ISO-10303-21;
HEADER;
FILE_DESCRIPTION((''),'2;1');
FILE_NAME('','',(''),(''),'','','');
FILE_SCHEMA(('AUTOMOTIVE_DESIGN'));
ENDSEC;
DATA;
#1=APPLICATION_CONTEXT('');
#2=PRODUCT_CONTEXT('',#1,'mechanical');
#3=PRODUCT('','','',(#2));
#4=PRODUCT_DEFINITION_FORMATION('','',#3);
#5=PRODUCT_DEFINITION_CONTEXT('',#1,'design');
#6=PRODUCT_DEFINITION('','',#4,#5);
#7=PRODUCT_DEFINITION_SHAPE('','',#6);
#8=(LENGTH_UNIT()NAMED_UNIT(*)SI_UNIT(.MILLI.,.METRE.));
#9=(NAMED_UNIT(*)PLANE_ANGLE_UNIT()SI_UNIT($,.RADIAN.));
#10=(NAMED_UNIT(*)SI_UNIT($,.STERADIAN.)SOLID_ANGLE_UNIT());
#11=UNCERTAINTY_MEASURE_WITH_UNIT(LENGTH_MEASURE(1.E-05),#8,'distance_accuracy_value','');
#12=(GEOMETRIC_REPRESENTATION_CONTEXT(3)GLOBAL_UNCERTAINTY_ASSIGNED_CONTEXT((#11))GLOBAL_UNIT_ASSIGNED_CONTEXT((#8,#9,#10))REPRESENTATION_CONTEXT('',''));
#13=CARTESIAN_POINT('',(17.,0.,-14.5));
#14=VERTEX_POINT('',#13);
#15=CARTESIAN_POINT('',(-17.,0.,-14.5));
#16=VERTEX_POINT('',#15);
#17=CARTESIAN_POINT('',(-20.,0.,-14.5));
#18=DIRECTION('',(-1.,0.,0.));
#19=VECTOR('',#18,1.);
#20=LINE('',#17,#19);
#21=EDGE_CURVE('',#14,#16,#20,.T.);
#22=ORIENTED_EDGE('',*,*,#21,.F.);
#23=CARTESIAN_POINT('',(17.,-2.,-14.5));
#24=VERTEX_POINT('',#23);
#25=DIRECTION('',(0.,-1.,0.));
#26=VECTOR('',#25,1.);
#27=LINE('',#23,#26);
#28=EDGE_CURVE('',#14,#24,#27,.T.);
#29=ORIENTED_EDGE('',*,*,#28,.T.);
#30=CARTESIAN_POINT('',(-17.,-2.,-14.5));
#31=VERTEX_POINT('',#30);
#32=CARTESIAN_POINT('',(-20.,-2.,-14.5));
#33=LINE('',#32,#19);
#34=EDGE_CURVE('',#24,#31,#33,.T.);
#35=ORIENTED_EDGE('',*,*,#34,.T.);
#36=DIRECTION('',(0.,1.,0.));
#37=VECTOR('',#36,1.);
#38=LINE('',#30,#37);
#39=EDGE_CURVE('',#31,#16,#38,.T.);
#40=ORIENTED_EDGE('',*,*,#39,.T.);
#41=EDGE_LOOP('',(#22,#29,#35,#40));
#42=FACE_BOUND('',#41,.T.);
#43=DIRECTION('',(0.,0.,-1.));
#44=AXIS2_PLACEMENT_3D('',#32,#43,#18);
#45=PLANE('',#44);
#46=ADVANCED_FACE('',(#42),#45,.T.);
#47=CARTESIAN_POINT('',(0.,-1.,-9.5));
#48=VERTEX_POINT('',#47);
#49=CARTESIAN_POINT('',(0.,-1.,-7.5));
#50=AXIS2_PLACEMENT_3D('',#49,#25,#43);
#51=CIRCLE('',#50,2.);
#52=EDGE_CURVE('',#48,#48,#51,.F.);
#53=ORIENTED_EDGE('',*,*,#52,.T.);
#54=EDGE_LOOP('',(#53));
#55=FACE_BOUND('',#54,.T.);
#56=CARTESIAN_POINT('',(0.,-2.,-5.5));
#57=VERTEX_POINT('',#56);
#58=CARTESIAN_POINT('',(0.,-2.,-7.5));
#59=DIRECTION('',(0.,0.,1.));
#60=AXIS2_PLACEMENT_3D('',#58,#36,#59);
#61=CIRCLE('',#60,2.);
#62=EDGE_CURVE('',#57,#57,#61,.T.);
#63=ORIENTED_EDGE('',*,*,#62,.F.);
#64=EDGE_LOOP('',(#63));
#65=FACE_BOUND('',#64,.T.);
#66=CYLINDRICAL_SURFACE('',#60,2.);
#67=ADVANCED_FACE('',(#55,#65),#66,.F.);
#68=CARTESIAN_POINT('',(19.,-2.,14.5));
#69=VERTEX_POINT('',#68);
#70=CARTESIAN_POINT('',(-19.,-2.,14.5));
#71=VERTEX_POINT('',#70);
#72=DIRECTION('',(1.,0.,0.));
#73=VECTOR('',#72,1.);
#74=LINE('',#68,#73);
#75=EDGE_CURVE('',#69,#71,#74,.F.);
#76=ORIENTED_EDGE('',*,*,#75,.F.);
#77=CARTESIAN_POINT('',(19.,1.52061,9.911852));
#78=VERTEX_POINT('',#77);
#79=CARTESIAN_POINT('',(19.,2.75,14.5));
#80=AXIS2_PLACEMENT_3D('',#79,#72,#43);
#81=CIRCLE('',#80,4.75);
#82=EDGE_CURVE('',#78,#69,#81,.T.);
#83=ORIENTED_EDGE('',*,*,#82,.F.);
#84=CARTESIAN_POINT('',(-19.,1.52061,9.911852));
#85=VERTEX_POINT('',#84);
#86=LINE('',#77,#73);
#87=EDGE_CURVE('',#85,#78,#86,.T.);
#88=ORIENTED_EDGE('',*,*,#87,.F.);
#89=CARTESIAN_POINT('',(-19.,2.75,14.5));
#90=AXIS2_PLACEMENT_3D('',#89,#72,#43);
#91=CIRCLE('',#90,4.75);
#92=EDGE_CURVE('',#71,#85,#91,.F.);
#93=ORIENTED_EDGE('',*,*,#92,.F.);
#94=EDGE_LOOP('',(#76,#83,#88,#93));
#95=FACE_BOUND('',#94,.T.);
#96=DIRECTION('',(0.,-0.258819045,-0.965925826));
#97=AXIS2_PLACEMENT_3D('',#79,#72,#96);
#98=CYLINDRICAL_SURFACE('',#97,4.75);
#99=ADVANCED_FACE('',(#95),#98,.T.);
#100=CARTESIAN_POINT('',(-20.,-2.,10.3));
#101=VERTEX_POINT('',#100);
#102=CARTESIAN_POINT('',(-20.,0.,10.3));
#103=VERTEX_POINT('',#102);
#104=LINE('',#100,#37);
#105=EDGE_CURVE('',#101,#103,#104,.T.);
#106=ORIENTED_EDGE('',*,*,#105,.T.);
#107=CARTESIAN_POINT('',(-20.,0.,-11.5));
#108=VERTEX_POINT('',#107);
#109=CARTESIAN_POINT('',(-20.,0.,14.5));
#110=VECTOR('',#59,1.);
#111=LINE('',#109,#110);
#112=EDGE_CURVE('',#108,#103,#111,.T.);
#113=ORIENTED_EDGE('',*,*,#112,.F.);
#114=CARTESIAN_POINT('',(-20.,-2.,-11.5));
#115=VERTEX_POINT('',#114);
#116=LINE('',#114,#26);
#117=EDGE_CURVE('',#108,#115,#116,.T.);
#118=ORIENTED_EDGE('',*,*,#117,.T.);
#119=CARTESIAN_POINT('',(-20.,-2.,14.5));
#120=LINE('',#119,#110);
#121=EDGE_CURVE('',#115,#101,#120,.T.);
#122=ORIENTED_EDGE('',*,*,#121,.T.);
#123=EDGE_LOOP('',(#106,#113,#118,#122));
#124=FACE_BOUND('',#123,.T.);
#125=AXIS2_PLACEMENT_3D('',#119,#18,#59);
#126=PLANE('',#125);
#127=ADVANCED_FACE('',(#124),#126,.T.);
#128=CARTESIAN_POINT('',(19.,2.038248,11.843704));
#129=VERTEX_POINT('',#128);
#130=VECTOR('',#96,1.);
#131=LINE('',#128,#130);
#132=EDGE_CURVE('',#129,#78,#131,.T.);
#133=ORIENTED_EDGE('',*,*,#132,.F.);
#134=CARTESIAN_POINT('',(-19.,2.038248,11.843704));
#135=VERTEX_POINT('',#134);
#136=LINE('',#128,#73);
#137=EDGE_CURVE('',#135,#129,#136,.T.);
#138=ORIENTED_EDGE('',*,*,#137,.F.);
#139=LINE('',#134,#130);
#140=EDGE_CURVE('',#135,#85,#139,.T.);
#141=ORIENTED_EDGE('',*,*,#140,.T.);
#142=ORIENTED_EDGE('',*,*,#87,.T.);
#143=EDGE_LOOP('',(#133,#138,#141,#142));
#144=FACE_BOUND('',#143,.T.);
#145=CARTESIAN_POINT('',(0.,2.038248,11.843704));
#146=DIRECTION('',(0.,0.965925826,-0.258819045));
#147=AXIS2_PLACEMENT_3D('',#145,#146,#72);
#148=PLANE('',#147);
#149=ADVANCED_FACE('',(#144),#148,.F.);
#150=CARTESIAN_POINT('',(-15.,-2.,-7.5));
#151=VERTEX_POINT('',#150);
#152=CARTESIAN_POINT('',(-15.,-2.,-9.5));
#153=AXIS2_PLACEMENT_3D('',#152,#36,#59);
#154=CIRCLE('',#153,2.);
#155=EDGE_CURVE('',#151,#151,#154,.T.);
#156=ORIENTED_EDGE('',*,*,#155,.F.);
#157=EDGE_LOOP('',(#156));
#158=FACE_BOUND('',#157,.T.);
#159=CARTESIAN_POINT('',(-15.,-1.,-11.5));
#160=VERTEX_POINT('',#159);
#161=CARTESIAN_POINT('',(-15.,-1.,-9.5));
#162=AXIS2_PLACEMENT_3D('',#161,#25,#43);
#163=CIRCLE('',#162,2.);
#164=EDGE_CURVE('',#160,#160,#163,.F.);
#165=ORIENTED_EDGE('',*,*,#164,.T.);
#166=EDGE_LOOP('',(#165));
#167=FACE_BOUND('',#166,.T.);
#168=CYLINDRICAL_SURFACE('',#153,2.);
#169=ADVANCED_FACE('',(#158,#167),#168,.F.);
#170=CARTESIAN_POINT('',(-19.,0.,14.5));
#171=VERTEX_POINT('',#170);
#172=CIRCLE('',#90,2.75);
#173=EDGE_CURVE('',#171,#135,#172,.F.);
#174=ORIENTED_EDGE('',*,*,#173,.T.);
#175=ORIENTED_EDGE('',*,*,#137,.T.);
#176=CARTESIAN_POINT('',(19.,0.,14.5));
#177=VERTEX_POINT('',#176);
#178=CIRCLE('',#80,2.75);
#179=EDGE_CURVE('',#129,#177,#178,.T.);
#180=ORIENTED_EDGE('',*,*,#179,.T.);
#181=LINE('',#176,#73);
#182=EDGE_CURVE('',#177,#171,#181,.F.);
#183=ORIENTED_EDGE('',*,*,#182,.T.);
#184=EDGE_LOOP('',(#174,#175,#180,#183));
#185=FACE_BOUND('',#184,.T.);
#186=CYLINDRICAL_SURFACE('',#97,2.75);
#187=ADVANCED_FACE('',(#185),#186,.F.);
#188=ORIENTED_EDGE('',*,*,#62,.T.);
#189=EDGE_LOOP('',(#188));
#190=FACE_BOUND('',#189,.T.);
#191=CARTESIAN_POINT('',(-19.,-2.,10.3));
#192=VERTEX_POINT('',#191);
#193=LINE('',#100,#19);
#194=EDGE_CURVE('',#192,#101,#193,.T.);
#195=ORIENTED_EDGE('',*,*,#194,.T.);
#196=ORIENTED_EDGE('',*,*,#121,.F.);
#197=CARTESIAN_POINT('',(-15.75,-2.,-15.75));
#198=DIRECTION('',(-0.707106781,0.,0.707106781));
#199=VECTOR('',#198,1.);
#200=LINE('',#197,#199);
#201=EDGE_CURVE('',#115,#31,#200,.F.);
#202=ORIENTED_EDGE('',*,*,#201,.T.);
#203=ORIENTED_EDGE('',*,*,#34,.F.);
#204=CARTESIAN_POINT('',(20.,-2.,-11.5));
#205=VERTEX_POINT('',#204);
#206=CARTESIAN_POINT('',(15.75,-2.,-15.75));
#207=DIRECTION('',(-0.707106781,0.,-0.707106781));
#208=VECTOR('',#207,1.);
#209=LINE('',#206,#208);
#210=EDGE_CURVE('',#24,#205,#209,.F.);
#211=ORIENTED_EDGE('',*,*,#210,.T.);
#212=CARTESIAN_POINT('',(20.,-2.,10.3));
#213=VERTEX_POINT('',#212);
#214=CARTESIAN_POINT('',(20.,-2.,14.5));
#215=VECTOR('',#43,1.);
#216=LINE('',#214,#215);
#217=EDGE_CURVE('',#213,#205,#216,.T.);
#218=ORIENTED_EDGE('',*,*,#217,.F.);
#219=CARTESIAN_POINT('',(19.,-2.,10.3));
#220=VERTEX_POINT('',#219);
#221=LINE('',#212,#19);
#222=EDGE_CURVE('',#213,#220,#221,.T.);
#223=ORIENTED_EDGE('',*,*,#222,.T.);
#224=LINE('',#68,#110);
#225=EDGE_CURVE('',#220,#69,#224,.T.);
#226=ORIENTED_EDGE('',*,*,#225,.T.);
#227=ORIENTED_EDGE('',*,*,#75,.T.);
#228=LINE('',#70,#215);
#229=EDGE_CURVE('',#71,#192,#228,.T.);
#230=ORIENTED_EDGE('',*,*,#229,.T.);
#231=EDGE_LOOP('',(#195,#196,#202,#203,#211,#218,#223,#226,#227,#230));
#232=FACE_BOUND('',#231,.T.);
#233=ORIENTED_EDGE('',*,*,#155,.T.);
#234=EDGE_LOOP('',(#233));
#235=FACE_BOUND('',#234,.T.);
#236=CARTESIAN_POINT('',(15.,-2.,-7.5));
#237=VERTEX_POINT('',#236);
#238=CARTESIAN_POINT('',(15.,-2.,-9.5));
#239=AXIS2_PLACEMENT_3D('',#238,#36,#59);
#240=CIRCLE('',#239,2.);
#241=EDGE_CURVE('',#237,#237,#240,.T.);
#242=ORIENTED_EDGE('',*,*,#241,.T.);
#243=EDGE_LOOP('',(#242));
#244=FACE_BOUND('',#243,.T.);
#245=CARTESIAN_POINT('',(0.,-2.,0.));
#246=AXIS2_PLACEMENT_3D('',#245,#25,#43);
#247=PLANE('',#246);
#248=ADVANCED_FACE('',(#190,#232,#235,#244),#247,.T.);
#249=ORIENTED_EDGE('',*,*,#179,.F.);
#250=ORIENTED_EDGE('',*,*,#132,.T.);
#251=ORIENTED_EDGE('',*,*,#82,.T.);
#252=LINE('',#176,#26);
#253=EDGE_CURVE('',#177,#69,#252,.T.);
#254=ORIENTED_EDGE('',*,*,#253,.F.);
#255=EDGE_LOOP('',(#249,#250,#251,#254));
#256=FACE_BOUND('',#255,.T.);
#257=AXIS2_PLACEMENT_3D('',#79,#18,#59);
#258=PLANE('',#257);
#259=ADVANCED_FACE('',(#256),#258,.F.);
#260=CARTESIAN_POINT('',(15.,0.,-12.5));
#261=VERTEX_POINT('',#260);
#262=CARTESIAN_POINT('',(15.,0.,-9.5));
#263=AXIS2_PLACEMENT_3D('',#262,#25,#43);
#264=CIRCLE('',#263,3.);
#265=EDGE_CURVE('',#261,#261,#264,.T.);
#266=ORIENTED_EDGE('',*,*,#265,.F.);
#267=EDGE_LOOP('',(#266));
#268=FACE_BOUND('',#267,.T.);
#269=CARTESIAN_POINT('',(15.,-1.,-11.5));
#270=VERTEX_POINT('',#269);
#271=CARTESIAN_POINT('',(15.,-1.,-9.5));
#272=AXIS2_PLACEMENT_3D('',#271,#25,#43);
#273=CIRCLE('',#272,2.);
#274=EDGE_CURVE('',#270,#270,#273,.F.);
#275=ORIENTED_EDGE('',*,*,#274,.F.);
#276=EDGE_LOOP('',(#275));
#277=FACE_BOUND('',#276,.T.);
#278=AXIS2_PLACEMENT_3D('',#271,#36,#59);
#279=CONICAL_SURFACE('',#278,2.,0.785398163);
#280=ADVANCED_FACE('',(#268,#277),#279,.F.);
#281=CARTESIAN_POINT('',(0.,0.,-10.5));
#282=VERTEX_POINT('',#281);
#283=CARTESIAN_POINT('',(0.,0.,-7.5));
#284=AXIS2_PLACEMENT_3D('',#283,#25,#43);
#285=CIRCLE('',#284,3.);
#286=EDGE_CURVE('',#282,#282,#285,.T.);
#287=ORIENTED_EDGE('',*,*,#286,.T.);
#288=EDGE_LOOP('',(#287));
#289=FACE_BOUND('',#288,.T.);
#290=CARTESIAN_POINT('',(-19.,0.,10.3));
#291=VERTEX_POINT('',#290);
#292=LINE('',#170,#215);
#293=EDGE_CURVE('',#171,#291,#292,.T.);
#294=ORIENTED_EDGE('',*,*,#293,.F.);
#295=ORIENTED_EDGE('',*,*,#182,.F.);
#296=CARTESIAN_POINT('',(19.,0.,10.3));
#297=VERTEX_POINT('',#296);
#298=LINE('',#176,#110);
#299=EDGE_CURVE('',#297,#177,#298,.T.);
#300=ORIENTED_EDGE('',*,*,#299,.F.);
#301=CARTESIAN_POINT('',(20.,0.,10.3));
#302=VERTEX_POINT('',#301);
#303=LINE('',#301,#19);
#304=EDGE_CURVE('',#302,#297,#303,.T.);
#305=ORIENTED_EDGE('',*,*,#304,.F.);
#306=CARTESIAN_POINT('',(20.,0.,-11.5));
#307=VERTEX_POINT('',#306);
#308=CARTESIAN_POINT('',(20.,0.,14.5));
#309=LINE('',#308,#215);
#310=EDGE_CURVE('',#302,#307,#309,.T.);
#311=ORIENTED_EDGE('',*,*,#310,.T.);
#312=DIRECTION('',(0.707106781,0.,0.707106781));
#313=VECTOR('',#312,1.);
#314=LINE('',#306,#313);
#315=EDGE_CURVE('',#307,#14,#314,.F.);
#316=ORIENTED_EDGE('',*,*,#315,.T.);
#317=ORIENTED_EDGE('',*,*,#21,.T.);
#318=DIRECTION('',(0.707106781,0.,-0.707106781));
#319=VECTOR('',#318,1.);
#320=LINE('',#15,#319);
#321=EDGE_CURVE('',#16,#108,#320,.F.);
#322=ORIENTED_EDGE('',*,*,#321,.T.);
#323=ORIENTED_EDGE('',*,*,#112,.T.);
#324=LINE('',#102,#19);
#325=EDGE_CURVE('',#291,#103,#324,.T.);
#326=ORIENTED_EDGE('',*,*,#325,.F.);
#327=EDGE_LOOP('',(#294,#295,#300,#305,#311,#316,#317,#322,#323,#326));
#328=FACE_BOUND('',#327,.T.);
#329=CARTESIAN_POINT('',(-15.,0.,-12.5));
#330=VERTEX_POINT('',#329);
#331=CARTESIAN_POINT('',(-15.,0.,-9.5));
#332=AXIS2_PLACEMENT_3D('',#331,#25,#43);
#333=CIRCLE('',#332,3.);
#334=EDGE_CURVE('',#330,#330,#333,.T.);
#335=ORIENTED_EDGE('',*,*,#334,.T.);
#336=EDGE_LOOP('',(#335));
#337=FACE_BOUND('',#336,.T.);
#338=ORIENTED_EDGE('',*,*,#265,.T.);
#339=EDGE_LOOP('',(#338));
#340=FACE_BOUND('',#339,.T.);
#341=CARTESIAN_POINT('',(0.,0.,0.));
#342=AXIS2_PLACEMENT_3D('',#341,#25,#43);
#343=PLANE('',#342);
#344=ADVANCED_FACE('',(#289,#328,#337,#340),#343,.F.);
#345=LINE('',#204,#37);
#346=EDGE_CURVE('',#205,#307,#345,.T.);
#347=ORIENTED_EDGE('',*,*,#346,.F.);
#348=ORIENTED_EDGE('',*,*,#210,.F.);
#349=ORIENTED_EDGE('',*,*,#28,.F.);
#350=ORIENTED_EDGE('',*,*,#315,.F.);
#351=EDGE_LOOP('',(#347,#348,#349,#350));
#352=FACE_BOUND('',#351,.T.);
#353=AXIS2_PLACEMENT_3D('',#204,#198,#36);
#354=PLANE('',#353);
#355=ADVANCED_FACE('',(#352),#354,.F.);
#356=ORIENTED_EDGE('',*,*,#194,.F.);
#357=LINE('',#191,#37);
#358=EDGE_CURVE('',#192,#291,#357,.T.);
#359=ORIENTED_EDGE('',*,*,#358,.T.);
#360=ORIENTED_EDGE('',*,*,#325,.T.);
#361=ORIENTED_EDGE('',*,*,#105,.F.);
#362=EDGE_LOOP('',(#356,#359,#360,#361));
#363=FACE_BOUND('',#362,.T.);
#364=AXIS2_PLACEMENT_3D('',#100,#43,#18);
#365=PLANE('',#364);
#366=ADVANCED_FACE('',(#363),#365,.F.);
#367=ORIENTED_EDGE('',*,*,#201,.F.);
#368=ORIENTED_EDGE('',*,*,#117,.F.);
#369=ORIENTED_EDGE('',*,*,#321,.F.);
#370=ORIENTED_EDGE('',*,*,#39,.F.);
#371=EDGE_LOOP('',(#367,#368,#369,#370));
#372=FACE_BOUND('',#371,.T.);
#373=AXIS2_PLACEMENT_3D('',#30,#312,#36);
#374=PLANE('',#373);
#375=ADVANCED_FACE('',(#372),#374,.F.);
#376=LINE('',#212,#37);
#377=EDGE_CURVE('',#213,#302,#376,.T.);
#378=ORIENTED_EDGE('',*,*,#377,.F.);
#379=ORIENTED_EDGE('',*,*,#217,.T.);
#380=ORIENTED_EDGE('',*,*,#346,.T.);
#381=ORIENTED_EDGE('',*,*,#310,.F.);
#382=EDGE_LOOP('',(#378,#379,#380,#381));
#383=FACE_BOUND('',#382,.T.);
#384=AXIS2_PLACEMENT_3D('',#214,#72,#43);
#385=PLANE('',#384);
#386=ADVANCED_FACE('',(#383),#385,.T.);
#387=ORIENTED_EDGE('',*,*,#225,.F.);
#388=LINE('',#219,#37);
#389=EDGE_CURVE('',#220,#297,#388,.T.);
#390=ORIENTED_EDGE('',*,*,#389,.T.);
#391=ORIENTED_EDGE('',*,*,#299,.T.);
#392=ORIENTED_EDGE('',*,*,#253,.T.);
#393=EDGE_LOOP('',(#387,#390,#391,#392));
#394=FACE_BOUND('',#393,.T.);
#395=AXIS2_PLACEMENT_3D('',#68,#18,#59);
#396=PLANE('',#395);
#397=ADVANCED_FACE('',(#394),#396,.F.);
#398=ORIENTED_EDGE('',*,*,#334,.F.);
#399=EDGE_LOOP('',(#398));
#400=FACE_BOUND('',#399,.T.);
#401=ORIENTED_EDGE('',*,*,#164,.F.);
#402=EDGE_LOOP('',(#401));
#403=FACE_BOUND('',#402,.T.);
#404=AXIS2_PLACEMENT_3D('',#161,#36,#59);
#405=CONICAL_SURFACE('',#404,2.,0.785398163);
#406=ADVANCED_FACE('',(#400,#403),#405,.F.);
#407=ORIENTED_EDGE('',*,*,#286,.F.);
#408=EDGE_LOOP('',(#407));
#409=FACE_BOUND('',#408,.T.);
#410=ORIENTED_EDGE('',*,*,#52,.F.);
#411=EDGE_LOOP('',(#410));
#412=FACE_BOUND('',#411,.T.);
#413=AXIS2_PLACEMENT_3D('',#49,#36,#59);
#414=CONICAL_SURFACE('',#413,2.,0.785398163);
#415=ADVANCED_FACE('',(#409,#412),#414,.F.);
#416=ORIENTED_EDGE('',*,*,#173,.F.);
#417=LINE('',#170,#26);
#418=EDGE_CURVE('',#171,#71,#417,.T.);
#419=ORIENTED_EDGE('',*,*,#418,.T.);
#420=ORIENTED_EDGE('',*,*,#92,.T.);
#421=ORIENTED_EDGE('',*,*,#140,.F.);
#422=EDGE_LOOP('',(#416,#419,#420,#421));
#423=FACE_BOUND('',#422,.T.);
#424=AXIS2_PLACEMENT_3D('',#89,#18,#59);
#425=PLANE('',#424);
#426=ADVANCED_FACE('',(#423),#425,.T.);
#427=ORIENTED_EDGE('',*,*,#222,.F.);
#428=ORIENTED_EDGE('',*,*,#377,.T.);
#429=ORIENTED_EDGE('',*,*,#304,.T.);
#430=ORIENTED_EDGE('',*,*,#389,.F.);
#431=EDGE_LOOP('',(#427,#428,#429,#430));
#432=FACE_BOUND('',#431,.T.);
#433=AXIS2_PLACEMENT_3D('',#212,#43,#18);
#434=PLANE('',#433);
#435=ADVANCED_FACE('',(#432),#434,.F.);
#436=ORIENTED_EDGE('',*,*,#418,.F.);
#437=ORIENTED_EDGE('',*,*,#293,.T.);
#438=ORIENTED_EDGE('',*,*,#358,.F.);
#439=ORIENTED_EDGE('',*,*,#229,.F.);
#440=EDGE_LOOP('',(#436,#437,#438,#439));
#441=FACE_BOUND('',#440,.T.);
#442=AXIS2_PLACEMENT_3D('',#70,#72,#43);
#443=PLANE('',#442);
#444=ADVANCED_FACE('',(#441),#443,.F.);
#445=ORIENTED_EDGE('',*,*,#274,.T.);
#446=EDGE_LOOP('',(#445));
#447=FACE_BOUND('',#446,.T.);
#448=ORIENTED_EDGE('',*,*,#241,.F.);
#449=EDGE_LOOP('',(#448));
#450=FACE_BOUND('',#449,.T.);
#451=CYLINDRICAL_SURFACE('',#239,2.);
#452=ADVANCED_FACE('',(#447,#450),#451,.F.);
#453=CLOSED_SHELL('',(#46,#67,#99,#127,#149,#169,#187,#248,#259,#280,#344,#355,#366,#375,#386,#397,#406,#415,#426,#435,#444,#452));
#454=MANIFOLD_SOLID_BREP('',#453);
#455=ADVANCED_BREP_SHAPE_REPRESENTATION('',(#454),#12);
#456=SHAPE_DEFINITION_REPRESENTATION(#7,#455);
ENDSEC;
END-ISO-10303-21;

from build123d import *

# Parameters (mm, degrees)
SKETCH1_W           = 40
SKETCH1_H           = 29
BASE_FLANGE1_DEPTH  = 2
BREAK_CORNER1_START = -2
BREAK_CORNER1_DEPTH = 2
HEM2_START          = -19
HEM2_DEPTH          = 38
SKETCH10_W          = 1
SKETCH10_H          = 4.2
CUT_EXTRUDE1_DEPTH  = 10
SKETCH11_R          = 2
CUT_EXTRUDE2_DEPTH  = 2
CHAMFER1_SIZE       = 1


# Read off the part's stored shape, not the designer's step: Break-Corner1, Hem2
# Sheet-metal steps are written as plain solids
with BuildPart() as part:
    # Sketch1 → Base-Flange1 (new body)
    with BuildSketch(Plane(origin=(0, 0, 0), x_dir=(1, 0, 0), z_dir=(0, 1, 0))):
        Rectangle(SKETCH1_W, SKETCH1_H)
    extrude(amount=-BASE_FLANGE1_DEPTH)

    # Break-Corner1 outline → Break-Corner1 (cut)
    with BuildSketch(Plane(origin=(0, 0, 0), x_dir=(1, 0, 0), z_dir=(0, 1, 0)).offset(BREAK_CORNER1_START)):
        Polygon((-20, 14.5), (-20, 11.5), (-17, 14.5), align=None)
        Polygon((20, 14.5), (17, 14.5), (20, 11.5), align=None)
    extrude(amount=BREAK_CORNER1_DEPTH, mode=Mode.SUBTRACT)

    # Hem2 outline → Hem2 (add)
    with BuildSketch(Plane.YZ.offset(HEM2_START)):
        with BuildLine():
            Line((2.038247626, 11.843703978), (1.520609536, 9.911852325))
            ThreePointArc((1.520609536, 9.911852325), (6.518428366, 17.391616788), (-2, 14.5))
            Line((-2, 14.5), (0, 14.5))
            ThreePointArc((0, 14.5), (4.931721686, 16.17409393), (2.038247626, 11.843703978))
        make_face()
    extrude(amount=HEM2_DEPTH)

    # Sketch10 → Cut-Extrude1 (cut)
    with BuildSketch(Plane(origin=(0, 0, 0), x_dir=(1, 0, 0), z_dir=(0, 1, 0))):
        with Locations((19.5, -12.4)):
            Rectangle(SKETCH10_W, SKETCH10_H)
        with Locations((-19.5, -12.4)):
            Rectangle(SKETCH10_W, SKETCH10_H)
    extrude(amount=-CUT_EXTRUDE1_DEPTH, mode=Mode.SUBTRACT)

    # Sketch11 → Cut-Extrude2 (cut)
    with BuildSketch(Plane(origin=(0, 0, 0), x_dir=(1, 0, 0), z_dir=(0, 1, 0))):
        with Locations(Location((-15, 9.5, 0), (0, 0, 270))):
            Circle(SKETCH11_R)
        with Locations(Location((0, 7.5, 0), (0, 0, 270))):
            Circle(SKETCH11_R)
        with Locations(Location((15, 9.5, 0), (0, 0, 270))):
            Circle(SKETCH11_R)
    extrude(amount=-CUT_EXTRUDE2_DEPTH, mode=Mode.SUBTRACT)

    # Chamfer1
    chamfer1_edges = [part.edges().sort_by_distance(p)[0] for p in [
        (-15, 0, -11.5),
        (0, 0, -9.5),
        (15, 0, -11.5),
    ]]
    chamfer(chamfer1_edges, length=CHAMFER1_SIZE)


solid = part.part
